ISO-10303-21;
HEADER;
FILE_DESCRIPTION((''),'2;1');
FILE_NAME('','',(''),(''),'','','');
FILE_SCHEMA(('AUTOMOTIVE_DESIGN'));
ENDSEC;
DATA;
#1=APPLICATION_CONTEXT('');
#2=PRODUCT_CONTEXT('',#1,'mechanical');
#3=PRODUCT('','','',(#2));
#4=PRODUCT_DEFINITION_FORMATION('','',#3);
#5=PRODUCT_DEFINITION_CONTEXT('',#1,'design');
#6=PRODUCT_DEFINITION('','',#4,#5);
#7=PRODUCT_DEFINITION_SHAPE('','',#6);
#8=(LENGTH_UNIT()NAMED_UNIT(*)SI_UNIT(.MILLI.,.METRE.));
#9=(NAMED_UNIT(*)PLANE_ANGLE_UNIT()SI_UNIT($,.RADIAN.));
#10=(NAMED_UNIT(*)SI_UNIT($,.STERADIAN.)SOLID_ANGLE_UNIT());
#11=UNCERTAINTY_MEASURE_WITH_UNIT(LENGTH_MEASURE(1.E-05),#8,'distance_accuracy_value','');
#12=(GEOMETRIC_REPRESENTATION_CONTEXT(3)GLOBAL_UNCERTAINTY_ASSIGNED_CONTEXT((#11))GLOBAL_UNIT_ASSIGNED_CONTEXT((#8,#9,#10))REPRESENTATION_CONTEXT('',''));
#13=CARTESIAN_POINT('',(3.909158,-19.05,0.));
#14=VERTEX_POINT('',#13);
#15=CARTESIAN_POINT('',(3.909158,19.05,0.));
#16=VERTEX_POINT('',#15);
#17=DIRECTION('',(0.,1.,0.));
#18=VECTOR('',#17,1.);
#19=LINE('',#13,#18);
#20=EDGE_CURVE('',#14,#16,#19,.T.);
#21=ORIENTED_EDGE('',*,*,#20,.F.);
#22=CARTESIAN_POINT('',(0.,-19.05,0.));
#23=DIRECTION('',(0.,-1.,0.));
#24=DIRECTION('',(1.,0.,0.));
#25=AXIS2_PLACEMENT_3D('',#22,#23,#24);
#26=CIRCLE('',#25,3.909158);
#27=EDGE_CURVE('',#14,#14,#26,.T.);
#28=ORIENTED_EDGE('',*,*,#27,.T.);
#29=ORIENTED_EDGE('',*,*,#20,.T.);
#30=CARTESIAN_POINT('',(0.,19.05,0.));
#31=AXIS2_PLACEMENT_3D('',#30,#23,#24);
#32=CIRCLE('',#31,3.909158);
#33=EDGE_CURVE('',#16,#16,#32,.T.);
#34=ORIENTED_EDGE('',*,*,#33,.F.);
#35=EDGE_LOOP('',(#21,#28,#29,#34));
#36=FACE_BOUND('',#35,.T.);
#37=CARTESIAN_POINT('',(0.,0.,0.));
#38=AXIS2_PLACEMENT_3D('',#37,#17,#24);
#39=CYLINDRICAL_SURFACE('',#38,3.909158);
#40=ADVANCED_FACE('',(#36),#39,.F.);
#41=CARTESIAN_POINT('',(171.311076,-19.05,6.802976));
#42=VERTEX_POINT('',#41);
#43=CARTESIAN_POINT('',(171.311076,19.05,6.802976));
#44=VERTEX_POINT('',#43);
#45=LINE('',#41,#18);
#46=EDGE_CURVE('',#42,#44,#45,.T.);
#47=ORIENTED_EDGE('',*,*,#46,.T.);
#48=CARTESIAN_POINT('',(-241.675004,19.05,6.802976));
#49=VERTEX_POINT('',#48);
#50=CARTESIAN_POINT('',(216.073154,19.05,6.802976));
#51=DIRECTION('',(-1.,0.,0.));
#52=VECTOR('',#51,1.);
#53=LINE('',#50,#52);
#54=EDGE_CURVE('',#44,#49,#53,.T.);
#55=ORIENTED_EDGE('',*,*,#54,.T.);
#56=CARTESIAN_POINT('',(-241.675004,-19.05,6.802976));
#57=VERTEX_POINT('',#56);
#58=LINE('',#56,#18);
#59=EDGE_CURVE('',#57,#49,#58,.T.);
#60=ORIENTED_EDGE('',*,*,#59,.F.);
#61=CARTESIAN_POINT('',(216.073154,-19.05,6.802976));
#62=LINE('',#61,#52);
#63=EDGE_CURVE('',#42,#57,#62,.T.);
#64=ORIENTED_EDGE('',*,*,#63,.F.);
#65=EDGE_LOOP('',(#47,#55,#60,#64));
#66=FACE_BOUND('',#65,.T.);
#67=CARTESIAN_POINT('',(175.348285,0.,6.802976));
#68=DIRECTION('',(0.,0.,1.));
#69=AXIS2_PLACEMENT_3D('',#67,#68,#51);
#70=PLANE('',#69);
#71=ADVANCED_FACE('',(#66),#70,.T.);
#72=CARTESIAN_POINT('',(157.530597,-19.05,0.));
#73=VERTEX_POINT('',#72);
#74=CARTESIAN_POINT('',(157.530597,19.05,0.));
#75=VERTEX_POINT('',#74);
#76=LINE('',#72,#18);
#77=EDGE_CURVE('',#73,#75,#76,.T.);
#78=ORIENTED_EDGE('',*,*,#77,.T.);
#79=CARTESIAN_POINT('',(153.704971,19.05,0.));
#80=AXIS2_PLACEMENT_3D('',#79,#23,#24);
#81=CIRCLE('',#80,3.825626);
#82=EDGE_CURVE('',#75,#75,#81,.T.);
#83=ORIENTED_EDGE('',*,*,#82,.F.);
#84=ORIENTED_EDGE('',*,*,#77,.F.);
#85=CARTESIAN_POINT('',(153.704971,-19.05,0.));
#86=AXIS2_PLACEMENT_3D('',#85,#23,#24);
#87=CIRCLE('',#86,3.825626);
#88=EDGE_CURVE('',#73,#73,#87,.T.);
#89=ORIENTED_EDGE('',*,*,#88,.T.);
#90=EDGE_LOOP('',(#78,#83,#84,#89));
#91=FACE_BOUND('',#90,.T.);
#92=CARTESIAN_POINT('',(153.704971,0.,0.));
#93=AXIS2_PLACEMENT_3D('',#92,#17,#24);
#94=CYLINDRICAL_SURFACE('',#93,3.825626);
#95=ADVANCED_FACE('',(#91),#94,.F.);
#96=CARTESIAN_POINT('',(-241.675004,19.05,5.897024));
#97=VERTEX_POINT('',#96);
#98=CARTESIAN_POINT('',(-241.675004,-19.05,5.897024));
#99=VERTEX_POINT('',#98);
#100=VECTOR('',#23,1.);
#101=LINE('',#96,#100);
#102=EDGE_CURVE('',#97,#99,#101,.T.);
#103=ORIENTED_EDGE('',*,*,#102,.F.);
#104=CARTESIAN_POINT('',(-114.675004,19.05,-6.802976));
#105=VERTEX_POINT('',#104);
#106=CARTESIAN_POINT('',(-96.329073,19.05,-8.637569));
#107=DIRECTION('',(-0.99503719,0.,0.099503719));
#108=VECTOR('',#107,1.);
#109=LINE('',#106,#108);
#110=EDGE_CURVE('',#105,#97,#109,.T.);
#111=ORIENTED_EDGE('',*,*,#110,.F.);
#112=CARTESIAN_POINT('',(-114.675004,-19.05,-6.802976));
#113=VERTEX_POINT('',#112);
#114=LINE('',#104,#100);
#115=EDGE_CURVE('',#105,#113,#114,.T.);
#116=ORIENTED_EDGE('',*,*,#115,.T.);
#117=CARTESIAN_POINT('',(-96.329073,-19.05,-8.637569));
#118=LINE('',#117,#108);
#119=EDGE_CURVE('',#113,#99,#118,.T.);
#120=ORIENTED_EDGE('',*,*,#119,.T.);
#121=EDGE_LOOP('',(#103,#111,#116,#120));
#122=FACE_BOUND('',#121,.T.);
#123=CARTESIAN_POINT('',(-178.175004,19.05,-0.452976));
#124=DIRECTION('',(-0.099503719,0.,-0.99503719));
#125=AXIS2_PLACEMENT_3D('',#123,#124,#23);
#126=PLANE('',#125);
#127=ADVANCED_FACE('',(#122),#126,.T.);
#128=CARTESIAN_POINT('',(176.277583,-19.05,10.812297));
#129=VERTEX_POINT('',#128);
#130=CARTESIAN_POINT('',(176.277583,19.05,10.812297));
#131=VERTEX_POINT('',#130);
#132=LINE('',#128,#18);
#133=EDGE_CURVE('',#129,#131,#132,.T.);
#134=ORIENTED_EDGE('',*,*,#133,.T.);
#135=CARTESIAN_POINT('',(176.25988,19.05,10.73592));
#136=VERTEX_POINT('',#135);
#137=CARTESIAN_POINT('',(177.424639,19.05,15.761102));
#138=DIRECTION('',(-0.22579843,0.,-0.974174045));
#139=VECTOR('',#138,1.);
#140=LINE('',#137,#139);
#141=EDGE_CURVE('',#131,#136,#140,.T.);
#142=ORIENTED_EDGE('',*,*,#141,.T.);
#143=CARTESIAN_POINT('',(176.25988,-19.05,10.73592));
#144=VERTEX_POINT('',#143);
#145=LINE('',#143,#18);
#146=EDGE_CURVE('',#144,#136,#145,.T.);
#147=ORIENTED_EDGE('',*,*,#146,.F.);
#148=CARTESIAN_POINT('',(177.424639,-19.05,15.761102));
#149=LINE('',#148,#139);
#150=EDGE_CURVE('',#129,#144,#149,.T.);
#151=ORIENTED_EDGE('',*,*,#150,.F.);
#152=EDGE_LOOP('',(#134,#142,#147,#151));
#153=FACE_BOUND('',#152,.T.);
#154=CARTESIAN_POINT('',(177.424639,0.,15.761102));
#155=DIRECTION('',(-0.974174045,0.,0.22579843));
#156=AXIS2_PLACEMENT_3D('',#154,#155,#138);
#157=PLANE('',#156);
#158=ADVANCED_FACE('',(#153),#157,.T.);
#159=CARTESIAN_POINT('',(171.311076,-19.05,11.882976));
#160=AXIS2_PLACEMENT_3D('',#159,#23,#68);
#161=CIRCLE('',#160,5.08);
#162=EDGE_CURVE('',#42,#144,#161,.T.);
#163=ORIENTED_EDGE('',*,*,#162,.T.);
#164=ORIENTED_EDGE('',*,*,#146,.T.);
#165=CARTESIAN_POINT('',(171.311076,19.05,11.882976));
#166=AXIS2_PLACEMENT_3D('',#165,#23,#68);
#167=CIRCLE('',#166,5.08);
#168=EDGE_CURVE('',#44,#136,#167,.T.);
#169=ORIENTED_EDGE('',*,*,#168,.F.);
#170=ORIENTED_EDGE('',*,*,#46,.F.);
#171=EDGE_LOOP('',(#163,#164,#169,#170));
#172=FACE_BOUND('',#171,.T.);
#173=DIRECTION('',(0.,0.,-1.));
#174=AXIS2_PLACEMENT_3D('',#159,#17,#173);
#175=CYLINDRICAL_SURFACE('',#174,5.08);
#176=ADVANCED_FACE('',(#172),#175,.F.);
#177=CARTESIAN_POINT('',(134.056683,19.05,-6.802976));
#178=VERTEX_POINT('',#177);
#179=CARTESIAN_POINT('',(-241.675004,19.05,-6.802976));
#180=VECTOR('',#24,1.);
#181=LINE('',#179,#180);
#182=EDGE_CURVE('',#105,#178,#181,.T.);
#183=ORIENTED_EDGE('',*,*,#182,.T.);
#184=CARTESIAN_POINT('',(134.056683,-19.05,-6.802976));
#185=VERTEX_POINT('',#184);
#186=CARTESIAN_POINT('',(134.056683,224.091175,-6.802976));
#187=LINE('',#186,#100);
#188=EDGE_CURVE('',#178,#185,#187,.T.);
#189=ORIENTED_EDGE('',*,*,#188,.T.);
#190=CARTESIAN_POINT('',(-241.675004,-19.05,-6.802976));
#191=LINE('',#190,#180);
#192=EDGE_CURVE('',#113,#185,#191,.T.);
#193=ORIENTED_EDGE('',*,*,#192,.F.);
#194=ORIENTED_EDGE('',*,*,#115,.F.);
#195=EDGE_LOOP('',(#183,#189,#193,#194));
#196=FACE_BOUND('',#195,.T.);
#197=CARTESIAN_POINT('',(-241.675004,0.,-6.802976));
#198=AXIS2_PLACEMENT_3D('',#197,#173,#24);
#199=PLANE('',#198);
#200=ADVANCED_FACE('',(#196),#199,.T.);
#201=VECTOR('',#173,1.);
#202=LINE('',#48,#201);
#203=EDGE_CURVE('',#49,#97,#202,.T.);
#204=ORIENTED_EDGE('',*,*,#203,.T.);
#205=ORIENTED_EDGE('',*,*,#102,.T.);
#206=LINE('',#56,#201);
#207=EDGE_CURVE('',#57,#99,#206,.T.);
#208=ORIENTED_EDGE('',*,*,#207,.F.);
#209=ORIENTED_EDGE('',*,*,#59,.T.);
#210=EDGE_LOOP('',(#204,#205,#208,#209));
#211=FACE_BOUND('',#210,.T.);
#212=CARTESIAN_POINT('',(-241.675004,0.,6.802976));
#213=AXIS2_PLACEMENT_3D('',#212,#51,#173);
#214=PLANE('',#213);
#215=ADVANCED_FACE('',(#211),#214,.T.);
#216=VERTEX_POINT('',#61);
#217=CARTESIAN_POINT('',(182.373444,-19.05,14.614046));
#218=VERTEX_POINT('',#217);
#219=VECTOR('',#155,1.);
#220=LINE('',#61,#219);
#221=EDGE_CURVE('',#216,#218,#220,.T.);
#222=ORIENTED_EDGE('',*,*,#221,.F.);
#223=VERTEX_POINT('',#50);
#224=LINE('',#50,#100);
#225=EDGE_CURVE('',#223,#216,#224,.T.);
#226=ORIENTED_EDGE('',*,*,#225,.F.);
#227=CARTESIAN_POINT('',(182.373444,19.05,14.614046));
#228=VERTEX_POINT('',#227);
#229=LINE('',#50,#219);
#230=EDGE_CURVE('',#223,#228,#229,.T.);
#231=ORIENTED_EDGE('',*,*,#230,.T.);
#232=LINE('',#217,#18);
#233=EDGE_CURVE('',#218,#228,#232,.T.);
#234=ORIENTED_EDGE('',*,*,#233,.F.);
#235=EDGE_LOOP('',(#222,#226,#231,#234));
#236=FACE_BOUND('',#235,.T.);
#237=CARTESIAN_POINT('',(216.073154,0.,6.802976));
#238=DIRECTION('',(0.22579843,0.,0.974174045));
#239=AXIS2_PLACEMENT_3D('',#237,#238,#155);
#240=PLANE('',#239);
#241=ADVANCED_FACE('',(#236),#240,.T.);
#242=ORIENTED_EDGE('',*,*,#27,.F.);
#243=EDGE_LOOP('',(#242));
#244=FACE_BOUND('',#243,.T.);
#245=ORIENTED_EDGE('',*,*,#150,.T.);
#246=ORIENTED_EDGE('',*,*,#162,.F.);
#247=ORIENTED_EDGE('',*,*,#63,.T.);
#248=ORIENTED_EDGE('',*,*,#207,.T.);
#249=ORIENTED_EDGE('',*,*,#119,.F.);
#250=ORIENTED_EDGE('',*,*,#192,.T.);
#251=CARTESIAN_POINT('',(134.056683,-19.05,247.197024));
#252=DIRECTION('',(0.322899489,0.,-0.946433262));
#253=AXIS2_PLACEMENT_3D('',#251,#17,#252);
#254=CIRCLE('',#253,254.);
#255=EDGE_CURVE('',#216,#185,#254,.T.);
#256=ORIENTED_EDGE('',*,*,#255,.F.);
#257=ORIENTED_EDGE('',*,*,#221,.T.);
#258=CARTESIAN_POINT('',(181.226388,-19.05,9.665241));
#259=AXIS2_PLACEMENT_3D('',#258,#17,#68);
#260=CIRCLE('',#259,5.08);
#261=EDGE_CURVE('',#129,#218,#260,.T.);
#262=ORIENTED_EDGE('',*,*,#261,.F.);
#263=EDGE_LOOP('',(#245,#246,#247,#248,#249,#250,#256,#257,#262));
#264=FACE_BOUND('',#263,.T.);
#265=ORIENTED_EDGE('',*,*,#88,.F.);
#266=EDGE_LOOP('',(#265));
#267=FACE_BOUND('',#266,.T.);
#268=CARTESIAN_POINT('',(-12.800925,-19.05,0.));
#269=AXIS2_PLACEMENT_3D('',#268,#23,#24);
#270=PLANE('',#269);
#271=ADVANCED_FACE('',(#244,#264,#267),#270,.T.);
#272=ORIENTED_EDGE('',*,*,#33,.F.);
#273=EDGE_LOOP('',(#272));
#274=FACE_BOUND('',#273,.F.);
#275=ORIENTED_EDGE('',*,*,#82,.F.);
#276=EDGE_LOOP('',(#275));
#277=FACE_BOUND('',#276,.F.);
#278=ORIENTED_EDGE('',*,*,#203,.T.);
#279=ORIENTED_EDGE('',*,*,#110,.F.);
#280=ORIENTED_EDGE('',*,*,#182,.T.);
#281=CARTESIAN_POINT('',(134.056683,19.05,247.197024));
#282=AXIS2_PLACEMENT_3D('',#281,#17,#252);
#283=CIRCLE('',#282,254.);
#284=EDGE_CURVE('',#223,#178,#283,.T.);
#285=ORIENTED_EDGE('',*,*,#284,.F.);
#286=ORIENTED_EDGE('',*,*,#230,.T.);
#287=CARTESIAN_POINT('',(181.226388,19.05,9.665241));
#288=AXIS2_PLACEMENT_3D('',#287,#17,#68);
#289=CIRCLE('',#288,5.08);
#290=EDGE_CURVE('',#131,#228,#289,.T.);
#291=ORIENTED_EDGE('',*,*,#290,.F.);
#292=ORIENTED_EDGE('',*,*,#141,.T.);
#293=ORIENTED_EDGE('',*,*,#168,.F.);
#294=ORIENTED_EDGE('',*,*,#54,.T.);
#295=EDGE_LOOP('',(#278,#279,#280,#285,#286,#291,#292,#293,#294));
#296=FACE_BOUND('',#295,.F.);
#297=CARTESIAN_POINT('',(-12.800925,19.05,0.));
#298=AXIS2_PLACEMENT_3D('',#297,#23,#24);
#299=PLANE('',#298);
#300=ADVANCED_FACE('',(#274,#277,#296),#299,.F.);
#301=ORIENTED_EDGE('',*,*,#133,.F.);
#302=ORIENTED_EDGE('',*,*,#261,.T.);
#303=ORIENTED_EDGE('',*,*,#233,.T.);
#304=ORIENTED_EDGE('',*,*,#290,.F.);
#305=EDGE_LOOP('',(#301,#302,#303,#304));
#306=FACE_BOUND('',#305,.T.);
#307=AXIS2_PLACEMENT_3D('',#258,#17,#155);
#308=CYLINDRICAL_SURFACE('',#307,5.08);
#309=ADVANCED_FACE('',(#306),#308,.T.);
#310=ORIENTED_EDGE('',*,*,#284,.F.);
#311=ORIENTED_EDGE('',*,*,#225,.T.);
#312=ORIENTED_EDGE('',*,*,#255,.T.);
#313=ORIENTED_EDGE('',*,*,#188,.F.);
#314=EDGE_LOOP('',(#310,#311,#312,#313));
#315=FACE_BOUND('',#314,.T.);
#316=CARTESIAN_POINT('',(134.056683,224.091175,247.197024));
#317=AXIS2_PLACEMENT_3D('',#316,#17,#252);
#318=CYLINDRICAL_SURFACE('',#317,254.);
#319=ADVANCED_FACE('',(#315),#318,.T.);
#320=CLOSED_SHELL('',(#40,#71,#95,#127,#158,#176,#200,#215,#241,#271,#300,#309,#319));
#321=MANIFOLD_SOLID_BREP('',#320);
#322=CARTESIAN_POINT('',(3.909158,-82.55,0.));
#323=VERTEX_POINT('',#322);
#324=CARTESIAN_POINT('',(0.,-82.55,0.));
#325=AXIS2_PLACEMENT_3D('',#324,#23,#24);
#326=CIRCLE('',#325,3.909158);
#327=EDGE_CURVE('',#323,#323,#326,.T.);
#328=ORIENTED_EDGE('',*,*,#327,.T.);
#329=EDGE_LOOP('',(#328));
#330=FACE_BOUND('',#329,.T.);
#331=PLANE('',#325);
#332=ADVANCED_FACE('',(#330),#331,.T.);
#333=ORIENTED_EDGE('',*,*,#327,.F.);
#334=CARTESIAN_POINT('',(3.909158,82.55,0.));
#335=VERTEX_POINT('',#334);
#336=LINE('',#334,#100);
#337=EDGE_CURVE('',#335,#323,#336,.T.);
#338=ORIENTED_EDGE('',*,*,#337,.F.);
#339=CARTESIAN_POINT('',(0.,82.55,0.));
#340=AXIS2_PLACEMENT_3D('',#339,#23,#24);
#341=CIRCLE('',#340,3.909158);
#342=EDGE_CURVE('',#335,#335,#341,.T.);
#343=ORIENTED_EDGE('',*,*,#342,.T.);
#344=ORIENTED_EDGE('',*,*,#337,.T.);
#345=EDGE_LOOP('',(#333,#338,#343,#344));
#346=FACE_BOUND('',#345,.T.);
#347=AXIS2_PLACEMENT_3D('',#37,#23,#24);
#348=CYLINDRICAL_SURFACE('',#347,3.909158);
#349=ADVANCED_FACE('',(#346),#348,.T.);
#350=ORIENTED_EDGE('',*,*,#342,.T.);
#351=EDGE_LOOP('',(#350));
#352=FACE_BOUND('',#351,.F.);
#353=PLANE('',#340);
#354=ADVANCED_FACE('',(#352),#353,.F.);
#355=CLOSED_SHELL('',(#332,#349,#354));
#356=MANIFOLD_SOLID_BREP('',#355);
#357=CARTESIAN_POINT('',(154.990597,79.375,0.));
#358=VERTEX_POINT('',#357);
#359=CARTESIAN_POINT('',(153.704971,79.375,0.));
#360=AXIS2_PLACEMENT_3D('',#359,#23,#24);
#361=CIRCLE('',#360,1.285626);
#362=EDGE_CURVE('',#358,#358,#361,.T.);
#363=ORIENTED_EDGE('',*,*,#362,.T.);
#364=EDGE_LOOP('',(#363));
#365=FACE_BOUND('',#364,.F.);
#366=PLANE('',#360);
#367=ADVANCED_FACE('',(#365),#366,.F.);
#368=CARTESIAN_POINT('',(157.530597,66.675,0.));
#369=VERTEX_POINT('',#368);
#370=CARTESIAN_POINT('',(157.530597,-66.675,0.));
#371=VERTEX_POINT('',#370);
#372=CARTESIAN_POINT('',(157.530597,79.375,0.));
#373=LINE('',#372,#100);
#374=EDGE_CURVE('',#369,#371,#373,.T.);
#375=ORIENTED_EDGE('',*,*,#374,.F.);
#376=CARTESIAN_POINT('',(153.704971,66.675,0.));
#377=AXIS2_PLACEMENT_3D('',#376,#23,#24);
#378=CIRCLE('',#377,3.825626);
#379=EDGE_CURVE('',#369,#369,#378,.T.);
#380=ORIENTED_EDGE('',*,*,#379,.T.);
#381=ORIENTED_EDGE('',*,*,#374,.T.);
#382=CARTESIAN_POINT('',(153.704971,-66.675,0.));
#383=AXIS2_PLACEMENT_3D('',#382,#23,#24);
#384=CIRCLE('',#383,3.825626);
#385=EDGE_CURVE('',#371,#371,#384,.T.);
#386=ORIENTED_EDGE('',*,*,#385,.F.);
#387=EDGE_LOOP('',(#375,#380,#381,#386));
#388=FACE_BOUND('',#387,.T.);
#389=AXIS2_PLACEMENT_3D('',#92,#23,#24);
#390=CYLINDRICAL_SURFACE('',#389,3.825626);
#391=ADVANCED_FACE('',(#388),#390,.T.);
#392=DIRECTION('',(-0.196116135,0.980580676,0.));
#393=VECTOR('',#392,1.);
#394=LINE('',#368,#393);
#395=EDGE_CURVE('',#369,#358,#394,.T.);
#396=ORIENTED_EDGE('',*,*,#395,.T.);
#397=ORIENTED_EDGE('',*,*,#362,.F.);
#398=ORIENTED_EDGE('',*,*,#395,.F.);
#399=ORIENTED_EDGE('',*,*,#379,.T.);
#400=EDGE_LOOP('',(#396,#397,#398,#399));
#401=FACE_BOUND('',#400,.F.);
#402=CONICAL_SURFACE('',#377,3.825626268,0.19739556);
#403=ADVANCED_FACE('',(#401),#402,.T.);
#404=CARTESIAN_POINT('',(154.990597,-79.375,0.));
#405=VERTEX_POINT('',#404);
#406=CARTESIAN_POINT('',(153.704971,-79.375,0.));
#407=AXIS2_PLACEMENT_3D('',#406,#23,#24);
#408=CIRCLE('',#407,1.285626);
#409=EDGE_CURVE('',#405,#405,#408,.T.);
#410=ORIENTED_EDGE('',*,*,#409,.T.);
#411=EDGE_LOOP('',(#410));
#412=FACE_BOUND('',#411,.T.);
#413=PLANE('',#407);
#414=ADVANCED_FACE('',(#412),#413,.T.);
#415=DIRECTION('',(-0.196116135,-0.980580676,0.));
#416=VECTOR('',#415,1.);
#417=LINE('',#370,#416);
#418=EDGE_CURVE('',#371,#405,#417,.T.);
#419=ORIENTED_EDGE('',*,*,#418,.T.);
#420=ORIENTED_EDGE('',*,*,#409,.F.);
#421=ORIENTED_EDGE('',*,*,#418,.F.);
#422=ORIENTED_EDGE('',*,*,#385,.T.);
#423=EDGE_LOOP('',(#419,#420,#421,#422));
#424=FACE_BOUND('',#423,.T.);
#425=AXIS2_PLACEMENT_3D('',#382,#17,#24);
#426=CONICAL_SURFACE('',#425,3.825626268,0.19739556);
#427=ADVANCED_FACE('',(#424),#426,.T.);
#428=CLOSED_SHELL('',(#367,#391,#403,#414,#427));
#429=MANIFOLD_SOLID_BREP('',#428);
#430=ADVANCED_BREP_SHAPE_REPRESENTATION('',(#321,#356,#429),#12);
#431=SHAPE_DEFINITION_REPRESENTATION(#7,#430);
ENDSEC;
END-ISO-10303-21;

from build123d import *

# Parameters (mm, degrees)
F0_R        = 3.9091582441
F1_DEPTH    = 82.55
F0_R_2      = 3.8256262675
F2_DEPTH    = 79.375
F3_DEPTH    = 19.05
F4_T1_DEPTH = 448.1823504125
F5_R        = 5.08
F6_SIZE2    = 12.7
F6_SIZE     = 127
F7_SIZE2    = 2.54
F7_SIZE     = 12.7


# Not quite as in the source:
# - a fillet or chamfer that OpenCascade refuses, or shapes differently, is made with other operations: its cross-section is extruded or revolved along the edge and cut away or added


with BuildPart() as f1:
    # F0 (on Front) → F1 (new body, symmetric)
    with BuildSketch(Plane.XZ):
        Circle(F0_R)
    extrude(amount=F1_DEPTH, both=True)


with BuildPart() as f2:
    # F0 (on Front) → F2 (new body, symmetric)
    with BuildSketch(Plane.XZ):
        with Locations((153.7049710751, 0)):
            Circle(F0_R_2)
    extrude(amount=F2_DEPTH, both=True)

    # F7
    f7_edges = [f2.edges().sort_by_distance(p)[0] for p in [
        (149.879345, 79.375, 0),
        (149.879345, -79.375, 0),
    ]]
    chamfer(f7_edges, length=F7_SIZE, length2=F7_SIZE2)


with BuildPart() as f3:
    # F0 (on Front) → F3 (new body, symmetric)
    with BuildSketch(Plane.XZ):
        Polygon((-241.6750043631, 6.8029756658), (-241.6750043631, -6.8029756658), (216.0731535405, -6.8029756658), (216.0731535405, 6.8029756658), (175.348284848, 6.8029756658), align=None)
        Circle(F0_R, mode=Mode.SUBTRACT)
        with Locations((153.7049710751, 0)):
            Circle(F0_R_2, mode=Mode.SUBTRACT)
        Polygon((175.348284848, 6.8029756658), (216.0731535405, 6.8029756658), (177.4246394634, 15.7611016184), align=None)
    extrude(amount=F3_DEPTH, both=True)

    # F4: fillet of radius 254 on 1 edges, made by hand

    # F4_s2 → F4_t1 (cut)
    with BuildSketch(Plane.XZ.offset(-224.0911752063)):
        with BuildLine():
            ThreePointArc((216.0731535405, 6.8029756658), (175.6253714227, -3.3784017971), (134.056683458, -6.8029756658))
            Line((134.056683458, -6.8029756658), (216.0731535405, -6.8029756658))
            Line((216.0731535405, -6.8029756658), (216.0731535405, 6.8029756658))
        make_face()
    extrude(amount=F4_T1_DEPTH, mode=Mode.SUBTRACT)

    # F5
    f5_edges = [f3.edges().sort_by_distance(p)[0] for p in [
        (175.348285, 0, 6.802976),
        (177.424639, 0, 15.761102),
    ]]
    fillet(f5_edges, radius=F5_R)

    # F6
    f6_edges = [f3.edges().sort_by_distance(p)[0] for p in [
        (-241.675004, 0, -6.802976),
    ]]
    f6_side = f3.faces().sort_by_distance((-53.80916, 0, -6.802976))[0]
    chamfer(f6_edges, length=F6_SIZE, length2=F6_SIZE2, reference=f6_side)


solid = Compound([f1.part, f2.part, f3.part])
